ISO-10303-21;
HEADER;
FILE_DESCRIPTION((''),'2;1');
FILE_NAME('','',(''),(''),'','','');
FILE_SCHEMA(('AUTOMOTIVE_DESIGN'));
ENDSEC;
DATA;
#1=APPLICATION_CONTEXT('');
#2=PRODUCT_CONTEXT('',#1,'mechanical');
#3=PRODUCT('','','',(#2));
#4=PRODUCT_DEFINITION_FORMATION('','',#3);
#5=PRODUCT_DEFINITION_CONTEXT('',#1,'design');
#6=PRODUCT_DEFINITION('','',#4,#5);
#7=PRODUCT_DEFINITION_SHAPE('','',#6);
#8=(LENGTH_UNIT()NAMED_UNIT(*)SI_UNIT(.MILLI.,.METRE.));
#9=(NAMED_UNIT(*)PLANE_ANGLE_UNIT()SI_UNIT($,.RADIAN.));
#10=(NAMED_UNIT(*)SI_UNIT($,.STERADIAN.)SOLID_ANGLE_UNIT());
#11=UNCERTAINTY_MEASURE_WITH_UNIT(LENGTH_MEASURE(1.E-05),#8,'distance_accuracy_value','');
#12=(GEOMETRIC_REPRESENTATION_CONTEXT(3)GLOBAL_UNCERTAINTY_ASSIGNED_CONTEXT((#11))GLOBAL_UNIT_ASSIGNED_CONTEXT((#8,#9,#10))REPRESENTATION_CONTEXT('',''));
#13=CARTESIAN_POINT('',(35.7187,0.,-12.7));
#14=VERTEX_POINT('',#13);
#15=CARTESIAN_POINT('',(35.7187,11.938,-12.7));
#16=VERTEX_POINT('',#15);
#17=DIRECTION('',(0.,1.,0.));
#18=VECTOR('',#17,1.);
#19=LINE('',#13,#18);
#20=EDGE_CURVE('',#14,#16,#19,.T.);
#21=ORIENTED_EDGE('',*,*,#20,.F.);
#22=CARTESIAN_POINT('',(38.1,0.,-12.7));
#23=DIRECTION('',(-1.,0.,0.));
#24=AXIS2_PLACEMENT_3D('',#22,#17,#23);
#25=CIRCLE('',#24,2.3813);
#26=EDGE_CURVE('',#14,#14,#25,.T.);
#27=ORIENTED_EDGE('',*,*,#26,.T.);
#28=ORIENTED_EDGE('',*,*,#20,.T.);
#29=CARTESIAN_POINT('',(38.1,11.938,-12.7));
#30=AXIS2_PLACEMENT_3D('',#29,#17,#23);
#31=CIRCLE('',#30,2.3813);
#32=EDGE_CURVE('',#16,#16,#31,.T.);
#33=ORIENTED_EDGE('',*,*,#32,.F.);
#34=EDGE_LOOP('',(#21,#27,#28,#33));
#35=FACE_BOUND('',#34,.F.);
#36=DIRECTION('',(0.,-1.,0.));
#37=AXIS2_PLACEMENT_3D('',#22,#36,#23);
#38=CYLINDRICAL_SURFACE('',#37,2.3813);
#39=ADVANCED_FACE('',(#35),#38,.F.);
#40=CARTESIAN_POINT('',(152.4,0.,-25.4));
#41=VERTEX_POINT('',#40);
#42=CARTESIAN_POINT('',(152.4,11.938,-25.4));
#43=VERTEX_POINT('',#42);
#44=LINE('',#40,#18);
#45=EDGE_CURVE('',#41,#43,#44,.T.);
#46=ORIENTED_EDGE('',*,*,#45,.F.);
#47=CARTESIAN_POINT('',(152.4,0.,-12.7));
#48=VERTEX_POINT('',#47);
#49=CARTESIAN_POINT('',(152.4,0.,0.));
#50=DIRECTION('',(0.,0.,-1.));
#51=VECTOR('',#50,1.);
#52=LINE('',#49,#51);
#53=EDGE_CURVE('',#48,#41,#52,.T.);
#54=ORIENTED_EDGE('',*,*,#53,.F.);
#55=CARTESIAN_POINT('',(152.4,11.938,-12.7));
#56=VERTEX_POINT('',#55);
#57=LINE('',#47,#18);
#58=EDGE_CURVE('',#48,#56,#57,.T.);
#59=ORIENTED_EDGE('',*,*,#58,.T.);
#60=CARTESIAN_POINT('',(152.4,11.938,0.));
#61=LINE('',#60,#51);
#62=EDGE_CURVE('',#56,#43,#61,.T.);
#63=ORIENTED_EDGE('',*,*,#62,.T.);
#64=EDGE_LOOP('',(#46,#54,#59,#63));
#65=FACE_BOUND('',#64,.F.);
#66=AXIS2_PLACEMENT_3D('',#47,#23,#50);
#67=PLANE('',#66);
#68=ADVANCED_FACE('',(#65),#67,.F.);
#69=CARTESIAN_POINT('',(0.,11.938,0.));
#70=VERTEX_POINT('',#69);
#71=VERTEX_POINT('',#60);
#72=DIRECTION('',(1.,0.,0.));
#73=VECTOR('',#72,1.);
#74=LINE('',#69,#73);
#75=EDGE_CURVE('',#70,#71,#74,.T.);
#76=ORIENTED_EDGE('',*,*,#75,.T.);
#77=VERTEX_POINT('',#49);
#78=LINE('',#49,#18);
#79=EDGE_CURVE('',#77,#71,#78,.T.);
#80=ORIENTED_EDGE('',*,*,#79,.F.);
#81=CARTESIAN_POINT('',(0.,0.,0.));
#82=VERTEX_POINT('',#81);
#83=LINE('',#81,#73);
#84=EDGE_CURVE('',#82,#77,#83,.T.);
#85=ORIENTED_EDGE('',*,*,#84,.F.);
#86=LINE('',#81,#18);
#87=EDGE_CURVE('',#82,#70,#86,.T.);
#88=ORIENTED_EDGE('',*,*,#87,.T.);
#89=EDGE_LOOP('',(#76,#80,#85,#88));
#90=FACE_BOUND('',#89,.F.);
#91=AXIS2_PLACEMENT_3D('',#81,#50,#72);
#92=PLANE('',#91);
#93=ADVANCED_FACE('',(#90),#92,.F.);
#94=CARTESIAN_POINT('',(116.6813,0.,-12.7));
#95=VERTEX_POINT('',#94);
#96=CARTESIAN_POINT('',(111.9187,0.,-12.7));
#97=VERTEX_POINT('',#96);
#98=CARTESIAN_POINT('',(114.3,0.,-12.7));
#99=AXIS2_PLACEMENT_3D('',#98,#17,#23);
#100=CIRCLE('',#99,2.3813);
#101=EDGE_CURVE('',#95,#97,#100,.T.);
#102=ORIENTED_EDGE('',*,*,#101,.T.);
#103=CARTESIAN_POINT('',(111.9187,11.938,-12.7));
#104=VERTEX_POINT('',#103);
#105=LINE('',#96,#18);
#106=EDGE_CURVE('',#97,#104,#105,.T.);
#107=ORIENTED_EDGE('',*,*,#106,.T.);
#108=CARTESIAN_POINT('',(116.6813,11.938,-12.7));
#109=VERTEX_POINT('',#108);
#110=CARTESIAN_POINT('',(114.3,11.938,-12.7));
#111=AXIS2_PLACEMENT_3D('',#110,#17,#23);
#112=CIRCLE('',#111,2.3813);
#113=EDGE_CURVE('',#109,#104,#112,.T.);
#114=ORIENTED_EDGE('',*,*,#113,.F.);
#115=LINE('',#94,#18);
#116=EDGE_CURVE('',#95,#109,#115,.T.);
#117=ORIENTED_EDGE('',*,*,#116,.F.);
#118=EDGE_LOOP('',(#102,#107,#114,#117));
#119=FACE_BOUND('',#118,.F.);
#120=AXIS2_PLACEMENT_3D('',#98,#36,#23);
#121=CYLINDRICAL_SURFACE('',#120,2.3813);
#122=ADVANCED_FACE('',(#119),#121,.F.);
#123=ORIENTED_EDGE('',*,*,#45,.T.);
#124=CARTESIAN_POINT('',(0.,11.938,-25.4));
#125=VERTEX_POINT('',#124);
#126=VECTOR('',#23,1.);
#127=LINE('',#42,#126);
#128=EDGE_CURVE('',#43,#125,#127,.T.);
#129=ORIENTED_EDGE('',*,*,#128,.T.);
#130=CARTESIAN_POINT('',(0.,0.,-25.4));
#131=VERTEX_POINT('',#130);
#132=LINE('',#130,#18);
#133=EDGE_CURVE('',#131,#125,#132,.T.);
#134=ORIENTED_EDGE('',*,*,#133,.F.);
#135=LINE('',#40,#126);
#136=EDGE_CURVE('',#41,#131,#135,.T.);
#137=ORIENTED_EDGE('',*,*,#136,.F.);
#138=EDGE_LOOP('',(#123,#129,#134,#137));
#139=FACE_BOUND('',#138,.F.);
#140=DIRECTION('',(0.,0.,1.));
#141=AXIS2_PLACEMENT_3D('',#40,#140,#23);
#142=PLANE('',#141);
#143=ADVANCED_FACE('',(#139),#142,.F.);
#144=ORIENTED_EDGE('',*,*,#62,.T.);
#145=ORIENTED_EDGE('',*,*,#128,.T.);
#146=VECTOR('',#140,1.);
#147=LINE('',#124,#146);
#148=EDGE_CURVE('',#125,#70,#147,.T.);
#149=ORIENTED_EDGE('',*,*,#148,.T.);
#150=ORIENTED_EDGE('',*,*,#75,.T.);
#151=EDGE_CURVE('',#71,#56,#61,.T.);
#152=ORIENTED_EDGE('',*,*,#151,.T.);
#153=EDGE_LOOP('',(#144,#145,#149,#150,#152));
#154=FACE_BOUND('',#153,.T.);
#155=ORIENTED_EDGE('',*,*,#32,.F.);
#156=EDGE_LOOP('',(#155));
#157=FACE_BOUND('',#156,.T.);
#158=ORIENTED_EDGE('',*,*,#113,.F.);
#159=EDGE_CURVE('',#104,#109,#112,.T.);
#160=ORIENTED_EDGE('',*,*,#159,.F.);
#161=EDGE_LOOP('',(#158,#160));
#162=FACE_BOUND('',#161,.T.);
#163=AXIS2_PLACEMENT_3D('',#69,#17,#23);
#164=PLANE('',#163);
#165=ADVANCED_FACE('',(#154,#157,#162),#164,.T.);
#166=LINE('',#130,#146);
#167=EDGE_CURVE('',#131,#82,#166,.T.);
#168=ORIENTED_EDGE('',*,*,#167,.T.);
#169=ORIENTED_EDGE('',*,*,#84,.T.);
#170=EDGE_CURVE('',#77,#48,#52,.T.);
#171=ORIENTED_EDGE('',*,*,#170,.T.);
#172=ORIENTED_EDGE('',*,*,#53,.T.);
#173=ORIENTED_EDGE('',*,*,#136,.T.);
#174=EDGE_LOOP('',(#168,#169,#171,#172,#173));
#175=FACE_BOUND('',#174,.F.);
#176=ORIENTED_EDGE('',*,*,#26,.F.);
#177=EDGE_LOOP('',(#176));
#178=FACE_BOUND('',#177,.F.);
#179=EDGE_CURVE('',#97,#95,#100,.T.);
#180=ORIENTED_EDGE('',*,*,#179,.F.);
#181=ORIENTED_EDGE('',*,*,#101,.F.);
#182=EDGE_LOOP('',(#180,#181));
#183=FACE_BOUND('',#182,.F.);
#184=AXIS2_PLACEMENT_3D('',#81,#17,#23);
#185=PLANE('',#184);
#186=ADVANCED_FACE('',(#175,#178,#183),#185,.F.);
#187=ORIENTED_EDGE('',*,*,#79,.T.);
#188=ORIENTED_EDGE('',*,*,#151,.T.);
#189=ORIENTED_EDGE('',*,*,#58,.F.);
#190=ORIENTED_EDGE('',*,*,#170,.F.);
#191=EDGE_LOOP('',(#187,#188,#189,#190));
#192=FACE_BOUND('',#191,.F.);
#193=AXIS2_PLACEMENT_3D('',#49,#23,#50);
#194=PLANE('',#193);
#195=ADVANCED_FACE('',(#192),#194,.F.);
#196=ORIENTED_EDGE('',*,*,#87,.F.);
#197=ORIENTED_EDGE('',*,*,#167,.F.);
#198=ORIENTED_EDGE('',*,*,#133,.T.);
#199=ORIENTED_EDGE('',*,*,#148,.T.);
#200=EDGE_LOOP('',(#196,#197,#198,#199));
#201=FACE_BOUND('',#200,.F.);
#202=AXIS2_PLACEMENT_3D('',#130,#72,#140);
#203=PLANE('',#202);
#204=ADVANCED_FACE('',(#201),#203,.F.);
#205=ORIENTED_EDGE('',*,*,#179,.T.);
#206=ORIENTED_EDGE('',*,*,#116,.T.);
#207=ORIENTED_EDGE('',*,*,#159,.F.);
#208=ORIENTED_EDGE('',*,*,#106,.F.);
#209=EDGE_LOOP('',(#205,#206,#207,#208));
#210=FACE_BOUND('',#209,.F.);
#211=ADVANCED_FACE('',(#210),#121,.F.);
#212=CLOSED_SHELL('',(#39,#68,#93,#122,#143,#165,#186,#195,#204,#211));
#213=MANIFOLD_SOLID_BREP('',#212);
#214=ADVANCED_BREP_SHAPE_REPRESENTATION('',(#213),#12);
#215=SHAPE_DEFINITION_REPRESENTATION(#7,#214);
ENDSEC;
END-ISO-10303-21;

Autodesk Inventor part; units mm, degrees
ref_plane "YZ Plane" through (0, 0, 0) normal (1, 0, 0) x (0, 1, 0)
ref_plane "XZ Plane" through (0, 0, 0) normal (0, 1, 0) x (-1, 0, 0)
ref_plane "XY Plane" through (0, 0, 0) normal (0, 0, 1) x (1, 0, 0)
sketch "Sketch1" plane through (0, 0, 0) normal (0, 1, 0) x (-1, 0, 0)
  line L0 (0, 0) -> (-152.4, 0)
  line L1 (-152.4, 0) -> (-152.4, -25.4)
  line L2 (-152.4, -25.4) -> (0, -25.4)
  line L3 (0, -25.4) -> (0, 0)
  line L4 (-152.4, -12.7) -> (0, -12.7) construction
  line L5 (-152.4, -12.7) -> (-114.3, -12.7)
  circle A0 centre (-114.3, -12.7) radius 2.3813
  line L6 (-76.2, 0) -> (-76.2, -25.4) construction
  circle A1 centre (-38.1, -12.7) radius 2.3813
  dimension "d0" = 152.4
  dimension "d1" = 25.4
  dimension "d10" = 38.1
  dimension "d11" = 4.7625
extrude "Extrusion1" add sketch "Sketch1" along normal blind 11.938
properties part number "flat"
